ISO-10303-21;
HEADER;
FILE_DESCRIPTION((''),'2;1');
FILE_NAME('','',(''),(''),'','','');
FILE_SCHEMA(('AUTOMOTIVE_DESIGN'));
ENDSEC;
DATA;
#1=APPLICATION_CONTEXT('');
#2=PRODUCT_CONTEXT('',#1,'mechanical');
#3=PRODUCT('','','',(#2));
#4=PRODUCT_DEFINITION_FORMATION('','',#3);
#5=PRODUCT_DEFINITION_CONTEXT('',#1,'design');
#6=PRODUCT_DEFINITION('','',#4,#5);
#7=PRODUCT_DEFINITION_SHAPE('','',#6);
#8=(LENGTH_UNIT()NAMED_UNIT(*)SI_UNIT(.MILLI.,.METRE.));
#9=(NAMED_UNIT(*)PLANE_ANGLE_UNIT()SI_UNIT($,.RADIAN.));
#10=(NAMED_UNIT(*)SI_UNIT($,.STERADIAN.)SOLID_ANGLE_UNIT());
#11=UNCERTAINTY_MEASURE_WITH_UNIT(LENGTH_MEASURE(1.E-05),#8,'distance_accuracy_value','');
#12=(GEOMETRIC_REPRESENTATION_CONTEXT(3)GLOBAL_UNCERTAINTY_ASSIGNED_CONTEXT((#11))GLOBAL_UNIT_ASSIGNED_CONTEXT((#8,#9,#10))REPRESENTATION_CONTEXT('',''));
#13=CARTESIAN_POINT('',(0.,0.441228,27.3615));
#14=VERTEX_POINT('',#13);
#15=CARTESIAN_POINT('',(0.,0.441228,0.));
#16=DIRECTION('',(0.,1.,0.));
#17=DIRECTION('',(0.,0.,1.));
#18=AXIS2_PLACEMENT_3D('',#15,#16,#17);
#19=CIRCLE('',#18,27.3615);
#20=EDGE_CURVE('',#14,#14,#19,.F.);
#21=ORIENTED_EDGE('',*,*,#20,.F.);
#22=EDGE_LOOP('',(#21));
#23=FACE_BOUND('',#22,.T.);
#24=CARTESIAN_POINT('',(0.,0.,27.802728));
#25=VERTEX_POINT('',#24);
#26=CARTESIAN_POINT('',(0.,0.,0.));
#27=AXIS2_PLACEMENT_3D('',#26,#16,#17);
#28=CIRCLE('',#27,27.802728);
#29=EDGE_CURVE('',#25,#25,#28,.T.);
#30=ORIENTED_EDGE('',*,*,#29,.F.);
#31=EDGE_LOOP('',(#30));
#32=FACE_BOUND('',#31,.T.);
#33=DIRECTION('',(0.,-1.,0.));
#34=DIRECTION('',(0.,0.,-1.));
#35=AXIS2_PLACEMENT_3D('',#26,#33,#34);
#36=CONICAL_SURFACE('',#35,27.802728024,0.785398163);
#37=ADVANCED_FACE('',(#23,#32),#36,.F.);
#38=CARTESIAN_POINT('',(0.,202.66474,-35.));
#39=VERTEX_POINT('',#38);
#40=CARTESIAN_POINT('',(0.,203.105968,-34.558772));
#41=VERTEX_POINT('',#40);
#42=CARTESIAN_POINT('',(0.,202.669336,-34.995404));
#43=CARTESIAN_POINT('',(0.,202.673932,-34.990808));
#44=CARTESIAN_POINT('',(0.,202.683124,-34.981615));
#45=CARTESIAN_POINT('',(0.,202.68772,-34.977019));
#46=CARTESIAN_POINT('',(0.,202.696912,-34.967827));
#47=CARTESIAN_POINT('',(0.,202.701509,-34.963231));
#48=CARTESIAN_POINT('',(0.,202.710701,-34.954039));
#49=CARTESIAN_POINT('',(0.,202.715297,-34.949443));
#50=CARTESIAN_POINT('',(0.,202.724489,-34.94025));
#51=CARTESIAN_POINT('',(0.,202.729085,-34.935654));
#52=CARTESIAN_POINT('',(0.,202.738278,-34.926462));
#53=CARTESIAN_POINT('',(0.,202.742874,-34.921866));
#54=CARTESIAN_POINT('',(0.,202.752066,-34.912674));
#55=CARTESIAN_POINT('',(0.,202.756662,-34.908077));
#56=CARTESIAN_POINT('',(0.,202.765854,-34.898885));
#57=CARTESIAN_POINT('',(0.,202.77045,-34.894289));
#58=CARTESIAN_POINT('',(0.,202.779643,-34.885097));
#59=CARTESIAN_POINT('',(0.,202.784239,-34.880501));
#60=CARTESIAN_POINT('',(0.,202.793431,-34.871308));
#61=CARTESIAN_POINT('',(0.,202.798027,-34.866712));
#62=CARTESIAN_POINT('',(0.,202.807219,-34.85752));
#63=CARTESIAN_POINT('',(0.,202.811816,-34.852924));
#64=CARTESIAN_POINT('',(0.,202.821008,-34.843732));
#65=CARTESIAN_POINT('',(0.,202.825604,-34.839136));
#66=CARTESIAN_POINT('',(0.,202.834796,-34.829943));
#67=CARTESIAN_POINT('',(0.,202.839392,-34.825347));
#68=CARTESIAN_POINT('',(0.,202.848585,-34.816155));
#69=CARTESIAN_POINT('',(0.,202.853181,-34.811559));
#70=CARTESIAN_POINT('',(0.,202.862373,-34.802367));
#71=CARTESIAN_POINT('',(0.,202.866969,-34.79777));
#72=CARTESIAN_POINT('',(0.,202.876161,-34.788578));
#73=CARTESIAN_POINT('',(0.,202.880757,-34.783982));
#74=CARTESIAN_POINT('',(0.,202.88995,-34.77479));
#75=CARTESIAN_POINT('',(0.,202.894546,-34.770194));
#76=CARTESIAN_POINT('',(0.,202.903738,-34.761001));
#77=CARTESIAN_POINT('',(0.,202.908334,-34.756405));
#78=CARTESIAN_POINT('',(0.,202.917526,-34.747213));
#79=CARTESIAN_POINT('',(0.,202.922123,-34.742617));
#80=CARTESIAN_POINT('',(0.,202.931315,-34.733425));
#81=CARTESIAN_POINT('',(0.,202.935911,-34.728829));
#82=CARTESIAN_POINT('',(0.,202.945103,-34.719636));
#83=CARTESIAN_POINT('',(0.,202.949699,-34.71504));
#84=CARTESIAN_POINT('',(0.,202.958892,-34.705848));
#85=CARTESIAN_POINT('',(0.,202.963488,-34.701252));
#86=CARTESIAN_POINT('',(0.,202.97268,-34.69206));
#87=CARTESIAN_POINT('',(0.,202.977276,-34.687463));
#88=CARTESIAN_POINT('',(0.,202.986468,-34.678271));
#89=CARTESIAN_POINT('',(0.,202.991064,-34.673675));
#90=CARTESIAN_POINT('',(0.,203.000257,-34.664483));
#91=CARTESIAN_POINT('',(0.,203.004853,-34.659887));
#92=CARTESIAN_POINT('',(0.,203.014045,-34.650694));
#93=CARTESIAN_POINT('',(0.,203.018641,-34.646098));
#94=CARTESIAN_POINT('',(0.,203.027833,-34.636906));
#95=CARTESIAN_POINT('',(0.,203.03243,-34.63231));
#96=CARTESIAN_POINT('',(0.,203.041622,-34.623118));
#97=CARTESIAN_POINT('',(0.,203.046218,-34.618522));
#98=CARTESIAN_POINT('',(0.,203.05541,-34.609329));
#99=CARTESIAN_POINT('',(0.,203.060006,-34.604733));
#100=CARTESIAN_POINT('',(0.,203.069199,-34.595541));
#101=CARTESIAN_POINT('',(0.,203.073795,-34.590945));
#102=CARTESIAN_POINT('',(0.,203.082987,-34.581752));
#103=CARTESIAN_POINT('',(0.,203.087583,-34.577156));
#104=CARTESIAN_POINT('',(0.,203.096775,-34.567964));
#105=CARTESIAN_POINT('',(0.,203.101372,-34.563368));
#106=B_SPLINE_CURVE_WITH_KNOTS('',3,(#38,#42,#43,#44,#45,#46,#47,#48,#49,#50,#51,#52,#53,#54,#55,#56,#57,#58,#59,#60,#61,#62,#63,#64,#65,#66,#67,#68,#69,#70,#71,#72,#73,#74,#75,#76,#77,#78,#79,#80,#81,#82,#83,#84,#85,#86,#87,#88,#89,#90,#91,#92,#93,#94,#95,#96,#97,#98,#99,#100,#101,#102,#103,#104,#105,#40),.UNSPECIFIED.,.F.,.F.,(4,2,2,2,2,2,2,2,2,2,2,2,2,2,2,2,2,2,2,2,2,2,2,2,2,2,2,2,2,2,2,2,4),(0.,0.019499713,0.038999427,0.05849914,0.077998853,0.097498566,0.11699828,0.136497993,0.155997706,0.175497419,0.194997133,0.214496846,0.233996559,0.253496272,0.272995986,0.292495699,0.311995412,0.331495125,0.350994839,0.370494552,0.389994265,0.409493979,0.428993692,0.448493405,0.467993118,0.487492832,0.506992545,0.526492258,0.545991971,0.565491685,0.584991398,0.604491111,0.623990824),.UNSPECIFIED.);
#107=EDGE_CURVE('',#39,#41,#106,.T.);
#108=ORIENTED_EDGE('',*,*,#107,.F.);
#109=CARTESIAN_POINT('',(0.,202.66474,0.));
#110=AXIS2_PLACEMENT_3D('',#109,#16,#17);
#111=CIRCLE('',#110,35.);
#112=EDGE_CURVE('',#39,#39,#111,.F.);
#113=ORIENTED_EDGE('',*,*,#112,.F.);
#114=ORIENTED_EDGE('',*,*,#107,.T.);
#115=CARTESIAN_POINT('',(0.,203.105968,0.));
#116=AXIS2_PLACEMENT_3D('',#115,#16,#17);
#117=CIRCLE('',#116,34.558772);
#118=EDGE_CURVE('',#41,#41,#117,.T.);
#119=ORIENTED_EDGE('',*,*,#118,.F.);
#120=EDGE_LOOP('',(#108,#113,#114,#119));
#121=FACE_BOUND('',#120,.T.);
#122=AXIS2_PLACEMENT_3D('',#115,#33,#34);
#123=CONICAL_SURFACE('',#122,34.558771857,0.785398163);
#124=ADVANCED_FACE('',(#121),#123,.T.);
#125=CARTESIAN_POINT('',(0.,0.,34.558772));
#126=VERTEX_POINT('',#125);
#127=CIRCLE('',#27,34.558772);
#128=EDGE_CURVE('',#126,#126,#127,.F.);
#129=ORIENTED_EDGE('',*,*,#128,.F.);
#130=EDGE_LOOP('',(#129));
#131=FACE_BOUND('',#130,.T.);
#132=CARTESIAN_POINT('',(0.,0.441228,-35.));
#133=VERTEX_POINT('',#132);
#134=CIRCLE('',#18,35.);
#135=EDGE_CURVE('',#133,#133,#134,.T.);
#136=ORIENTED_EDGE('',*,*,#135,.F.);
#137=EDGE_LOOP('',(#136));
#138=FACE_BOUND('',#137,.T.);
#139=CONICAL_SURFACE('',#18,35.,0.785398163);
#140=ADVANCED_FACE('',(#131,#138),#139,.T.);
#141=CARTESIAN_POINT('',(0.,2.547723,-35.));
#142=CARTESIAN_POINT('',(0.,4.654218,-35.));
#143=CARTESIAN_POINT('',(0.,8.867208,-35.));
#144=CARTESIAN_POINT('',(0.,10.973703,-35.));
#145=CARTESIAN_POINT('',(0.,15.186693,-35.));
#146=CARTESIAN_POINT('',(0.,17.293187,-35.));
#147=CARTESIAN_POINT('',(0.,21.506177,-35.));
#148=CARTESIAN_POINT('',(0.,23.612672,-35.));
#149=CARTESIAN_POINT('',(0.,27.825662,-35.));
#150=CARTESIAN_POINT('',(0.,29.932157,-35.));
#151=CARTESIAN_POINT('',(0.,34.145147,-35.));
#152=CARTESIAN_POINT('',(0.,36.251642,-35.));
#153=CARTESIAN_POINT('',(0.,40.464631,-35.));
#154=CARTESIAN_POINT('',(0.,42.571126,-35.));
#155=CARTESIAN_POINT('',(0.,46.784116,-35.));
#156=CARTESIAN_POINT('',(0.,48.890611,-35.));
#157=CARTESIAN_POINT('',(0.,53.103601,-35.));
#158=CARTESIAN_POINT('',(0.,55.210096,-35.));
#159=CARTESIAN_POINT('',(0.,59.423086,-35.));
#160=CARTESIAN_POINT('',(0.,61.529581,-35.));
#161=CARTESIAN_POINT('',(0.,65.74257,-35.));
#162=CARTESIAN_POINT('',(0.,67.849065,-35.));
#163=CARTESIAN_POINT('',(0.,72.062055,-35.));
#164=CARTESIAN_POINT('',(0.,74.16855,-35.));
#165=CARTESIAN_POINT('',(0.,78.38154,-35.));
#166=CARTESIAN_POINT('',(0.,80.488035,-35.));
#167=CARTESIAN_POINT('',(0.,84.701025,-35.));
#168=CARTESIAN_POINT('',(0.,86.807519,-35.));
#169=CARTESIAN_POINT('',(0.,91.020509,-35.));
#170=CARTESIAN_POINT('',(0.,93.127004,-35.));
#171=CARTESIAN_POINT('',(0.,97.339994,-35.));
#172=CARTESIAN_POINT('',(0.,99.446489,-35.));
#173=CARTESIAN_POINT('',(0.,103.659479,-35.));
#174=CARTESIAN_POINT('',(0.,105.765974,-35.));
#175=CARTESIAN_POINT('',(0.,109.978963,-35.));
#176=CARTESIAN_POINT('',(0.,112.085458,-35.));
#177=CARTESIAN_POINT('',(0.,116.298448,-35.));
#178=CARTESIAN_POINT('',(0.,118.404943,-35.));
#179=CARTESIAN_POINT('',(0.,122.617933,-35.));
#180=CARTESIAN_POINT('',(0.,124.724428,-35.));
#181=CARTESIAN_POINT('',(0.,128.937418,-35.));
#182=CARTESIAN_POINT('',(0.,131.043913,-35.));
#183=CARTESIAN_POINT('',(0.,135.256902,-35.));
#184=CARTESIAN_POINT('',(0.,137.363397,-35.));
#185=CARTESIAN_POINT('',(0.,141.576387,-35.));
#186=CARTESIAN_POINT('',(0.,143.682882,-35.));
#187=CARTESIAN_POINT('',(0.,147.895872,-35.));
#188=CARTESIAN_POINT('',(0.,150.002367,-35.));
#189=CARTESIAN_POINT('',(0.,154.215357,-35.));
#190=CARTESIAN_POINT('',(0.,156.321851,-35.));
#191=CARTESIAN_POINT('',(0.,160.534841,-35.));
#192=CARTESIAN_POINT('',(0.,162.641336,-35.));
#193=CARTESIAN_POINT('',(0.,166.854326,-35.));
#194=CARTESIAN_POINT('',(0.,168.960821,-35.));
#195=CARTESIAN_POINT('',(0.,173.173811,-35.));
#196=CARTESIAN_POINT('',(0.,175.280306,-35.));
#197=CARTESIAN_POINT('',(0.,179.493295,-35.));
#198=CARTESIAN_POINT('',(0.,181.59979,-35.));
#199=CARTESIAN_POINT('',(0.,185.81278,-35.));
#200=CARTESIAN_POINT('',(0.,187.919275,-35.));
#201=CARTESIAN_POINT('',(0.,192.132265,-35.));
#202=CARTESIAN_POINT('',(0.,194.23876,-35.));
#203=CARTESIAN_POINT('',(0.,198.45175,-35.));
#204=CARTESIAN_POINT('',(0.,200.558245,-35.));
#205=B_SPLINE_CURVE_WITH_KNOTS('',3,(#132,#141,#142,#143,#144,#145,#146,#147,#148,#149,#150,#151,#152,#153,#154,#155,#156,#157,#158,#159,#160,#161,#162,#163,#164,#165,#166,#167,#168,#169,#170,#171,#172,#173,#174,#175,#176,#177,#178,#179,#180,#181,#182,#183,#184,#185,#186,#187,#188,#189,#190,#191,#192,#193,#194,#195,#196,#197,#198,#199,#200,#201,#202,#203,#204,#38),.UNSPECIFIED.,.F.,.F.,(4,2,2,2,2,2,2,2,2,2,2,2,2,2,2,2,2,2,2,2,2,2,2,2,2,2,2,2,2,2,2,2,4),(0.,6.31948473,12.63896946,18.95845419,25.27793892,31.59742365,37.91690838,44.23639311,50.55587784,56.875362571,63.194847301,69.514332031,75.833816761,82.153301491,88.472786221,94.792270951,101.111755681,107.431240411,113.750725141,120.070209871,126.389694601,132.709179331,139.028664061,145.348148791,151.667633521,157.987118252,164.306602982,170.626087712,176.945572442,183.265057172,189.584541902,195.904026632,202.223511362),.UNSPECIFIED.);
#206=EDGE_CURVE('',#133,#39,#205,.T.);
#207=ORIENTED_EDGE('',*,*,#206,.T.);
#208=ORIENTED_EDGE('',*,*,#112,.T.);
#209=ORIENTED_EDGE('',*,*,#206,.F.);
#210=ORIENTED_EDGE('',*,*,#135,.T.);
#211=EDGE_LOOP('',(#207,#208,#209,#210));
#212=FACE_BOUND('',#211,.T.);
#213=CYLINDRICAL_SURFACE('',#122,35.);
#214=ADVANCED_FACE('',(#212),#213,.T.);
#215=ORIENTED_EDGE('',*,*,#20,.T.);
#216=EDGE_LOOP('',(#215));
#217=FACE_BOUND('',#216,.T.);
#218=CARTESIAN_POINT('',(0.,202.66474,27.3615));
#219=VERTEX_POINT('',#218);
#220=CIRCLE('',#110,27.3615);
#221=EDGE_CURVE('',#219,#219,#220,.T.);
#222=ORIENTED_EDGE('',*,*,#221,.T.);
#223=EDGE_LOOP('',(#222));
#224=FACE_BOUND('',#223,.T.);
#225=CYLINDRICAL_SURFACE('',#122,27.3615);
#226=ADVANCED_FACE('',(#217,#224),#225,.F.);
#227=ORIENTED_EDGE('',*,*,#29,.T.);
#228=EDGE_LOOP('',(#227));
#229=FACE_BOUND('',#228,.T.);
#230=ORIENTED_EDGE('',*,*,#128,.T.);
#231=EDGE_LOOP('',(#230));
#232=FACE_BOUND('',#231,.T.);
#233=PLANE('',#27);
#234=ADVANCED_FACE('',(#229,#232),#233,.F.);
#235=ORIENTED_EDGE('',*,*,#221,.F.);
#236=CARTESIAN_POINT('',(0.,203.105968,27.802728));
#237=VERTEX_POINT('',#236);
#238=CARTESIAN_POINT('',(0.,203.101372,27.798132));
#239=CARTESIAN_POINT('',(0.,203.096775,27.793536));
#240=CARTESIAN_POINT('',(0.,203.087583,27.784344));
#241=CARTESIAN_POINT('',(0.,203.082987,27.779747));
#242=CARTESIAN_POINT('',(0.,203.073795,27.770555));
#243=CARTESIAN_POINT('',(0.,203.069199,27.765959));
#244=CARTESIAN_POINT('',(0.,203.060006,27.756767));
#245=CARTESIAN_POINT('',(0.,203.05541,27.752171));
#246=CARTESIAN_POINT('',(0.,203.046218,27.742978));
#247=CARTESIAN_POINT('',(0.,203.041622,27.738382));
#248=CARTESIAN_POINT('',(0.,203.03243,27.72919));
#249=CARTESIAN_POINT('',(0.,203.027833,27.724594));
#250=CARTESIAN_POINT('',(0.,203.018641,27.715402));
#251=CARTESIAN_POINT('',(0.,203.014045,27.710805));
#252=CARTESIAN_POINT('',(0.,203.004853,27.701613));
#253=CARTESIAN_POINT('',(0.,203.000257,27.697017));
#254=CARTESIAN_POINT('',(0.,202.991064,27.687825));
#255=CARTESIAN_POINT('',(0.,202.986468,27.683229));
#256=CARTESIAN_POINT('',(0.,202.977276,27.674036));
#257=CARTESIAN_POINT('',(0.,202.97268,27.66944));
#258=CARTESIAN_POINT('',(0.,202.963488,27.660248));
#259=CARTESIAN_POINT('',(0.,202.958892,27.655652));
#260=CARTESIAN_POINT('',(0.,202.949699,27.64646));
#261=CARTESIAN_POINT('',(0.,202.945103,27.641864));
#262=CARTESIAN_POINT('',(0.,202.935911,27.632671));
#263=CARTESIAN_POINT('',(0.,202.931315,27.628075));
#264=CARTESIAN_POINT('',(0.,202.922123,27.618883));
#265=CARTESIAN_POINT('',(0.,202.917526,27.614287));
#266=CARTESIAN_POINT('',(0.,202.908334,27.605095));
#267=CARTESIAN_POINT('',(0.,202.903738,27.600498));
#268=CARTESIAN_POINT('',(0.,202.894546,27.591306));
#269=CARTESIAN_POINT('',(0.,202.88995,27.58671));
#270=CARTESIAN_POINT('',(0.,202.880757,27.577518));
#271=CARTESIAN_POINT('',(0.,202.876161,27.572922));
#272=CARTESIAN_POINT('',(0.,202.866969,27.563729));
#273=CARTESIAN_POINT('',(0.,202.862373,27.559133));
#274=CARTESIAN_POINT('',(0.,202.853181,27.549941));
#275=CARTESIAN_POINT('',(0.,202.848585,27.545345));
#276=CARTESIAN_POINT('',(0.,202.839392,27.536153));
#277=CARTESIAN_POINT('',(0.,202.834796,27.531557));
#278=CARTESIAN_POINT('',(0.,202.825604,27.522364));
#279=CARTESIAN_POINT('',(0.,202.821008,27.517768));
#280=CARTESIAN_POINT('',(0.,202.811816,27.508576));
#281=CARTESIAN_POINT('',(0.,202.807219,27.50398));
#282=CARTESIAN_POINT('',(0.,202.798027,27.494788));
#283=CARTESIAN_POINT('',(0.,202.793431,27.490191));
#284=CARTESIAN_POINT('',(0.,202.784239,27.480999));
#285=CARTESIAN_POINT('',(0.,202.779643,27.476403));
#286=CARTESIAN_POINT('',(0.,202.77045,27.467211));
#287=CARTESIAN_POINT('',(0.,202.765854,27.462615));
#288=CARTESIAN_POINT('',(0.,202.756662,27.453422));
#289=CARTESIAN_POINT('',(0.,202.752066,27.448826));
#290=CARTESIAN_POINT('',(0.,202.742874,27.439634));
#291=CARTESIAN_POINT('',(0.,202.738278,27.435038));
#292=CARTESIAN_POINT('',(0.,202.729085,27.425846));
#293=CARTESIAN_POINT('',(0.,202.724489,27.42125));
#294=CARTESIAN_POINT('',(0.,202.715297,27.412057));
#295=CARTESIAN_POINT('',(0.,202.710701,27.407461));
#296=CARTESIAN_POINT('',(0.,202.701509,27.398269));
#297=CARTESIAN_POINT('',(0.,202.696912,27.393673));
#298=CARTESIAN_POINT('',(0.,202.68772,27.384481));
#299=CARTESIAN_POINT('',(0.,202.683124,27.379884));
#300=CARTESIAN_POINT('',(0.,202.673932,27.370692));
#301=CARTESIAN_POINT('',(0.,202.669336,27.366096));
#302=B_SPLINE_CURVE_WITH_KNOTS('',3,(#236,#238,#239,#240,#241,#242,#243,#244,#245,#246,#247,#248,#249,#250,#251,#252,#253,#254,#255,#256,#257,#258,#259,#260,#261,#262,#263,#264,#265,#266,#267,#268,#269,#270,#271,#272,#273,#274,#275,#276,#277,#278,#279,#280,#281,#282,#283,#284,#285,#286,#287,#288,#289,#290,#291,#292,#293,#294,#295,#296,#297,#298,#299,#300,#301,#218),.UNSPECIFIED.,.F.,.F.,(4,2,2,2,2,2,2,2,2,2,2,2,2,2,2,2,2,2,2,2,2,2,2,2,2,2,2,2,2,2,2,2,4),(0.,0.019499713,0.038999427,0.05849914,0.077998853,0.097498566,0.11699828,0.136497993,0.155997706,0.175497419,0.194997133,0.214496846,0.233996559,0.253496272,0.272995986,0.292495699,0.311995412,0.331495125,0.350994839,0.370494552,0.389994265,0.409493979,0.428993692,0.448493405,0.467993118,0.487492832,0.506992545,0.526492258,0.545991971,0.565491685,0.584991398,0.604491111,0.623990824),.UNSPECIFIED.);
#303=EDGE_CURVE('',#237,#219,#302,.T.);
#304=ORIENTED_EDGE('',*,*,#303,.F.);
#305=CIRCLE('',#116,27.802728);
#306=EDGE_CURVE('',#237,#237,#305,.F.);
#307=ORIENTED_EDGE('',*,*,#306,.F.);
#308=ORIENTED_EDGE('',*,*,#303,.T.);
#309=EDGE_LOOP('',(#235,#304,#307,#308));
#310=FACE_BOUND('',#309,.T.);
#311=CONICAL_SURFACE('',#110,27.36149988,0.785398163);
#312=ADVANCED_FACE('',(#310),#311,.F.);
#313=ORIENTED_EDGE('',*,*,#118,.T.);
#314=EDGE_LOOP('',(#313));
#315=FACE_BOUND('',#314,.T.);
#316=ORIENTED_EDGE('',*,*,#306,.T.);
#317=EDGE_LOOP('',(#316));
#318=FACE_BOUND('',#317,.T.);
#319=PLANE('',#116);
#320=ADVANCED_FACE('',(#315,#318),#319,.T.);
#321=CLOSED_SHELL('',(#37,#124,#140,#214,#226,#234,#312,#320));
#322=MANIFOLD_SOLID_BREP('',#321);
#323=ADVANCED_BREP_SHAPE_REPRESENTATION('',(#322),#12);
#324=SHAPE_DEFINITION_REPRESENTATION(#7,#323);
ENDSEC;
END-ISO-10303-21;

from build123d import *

# Parameters (mm, degrees)
SKETCH1_R           = 35
BOSS_EXTRUDE1_DEPTH = 203.105967649
SKETCH2_R           = 27.36149988
CUT_EXTRUDE1_DEPTH  = 210.050314744
CHAMFER1_SIZE       = 0.441228143


with BuildPart() as part:
    # Sketch1 → Boss-Extrude1 (new body)
    with BuildSketch(Plane(origin=(0, 0, 0), x_dir=(1, 0, 0), z_dir=(0, 1, 0))):
        Circle(SKETCH1_R)
    extrude(amount=BOSS_EXTRUDE1_DEPTH)

    # Sketch2 → Cut-Extrude1 (cut, through all)
    with BuildSketch(Plane(origin=(0, 0, 0), x_dir=(1, 0, 0), z_dir=(0, 1, 0))):
        Circle(SKETCH2_R)
    extrude(amount=CUT_EXTRUDE1_DEPTH, mode=Mode.SUBTRACT)

    # Chamfer1
    chamfer1_edges = [part.edges().sort_by_distance(p)[0] for p in [
        (-27.36149988, 203.105967649, 0),
        (-27.36149988, 0, 0),
        (-35, 0, 0),
        (-35, 203.105967649, 0),
    ]]
    chamfer(chamfer1_edges, length=CHAMFER1_SIZE)


solid = part.part
